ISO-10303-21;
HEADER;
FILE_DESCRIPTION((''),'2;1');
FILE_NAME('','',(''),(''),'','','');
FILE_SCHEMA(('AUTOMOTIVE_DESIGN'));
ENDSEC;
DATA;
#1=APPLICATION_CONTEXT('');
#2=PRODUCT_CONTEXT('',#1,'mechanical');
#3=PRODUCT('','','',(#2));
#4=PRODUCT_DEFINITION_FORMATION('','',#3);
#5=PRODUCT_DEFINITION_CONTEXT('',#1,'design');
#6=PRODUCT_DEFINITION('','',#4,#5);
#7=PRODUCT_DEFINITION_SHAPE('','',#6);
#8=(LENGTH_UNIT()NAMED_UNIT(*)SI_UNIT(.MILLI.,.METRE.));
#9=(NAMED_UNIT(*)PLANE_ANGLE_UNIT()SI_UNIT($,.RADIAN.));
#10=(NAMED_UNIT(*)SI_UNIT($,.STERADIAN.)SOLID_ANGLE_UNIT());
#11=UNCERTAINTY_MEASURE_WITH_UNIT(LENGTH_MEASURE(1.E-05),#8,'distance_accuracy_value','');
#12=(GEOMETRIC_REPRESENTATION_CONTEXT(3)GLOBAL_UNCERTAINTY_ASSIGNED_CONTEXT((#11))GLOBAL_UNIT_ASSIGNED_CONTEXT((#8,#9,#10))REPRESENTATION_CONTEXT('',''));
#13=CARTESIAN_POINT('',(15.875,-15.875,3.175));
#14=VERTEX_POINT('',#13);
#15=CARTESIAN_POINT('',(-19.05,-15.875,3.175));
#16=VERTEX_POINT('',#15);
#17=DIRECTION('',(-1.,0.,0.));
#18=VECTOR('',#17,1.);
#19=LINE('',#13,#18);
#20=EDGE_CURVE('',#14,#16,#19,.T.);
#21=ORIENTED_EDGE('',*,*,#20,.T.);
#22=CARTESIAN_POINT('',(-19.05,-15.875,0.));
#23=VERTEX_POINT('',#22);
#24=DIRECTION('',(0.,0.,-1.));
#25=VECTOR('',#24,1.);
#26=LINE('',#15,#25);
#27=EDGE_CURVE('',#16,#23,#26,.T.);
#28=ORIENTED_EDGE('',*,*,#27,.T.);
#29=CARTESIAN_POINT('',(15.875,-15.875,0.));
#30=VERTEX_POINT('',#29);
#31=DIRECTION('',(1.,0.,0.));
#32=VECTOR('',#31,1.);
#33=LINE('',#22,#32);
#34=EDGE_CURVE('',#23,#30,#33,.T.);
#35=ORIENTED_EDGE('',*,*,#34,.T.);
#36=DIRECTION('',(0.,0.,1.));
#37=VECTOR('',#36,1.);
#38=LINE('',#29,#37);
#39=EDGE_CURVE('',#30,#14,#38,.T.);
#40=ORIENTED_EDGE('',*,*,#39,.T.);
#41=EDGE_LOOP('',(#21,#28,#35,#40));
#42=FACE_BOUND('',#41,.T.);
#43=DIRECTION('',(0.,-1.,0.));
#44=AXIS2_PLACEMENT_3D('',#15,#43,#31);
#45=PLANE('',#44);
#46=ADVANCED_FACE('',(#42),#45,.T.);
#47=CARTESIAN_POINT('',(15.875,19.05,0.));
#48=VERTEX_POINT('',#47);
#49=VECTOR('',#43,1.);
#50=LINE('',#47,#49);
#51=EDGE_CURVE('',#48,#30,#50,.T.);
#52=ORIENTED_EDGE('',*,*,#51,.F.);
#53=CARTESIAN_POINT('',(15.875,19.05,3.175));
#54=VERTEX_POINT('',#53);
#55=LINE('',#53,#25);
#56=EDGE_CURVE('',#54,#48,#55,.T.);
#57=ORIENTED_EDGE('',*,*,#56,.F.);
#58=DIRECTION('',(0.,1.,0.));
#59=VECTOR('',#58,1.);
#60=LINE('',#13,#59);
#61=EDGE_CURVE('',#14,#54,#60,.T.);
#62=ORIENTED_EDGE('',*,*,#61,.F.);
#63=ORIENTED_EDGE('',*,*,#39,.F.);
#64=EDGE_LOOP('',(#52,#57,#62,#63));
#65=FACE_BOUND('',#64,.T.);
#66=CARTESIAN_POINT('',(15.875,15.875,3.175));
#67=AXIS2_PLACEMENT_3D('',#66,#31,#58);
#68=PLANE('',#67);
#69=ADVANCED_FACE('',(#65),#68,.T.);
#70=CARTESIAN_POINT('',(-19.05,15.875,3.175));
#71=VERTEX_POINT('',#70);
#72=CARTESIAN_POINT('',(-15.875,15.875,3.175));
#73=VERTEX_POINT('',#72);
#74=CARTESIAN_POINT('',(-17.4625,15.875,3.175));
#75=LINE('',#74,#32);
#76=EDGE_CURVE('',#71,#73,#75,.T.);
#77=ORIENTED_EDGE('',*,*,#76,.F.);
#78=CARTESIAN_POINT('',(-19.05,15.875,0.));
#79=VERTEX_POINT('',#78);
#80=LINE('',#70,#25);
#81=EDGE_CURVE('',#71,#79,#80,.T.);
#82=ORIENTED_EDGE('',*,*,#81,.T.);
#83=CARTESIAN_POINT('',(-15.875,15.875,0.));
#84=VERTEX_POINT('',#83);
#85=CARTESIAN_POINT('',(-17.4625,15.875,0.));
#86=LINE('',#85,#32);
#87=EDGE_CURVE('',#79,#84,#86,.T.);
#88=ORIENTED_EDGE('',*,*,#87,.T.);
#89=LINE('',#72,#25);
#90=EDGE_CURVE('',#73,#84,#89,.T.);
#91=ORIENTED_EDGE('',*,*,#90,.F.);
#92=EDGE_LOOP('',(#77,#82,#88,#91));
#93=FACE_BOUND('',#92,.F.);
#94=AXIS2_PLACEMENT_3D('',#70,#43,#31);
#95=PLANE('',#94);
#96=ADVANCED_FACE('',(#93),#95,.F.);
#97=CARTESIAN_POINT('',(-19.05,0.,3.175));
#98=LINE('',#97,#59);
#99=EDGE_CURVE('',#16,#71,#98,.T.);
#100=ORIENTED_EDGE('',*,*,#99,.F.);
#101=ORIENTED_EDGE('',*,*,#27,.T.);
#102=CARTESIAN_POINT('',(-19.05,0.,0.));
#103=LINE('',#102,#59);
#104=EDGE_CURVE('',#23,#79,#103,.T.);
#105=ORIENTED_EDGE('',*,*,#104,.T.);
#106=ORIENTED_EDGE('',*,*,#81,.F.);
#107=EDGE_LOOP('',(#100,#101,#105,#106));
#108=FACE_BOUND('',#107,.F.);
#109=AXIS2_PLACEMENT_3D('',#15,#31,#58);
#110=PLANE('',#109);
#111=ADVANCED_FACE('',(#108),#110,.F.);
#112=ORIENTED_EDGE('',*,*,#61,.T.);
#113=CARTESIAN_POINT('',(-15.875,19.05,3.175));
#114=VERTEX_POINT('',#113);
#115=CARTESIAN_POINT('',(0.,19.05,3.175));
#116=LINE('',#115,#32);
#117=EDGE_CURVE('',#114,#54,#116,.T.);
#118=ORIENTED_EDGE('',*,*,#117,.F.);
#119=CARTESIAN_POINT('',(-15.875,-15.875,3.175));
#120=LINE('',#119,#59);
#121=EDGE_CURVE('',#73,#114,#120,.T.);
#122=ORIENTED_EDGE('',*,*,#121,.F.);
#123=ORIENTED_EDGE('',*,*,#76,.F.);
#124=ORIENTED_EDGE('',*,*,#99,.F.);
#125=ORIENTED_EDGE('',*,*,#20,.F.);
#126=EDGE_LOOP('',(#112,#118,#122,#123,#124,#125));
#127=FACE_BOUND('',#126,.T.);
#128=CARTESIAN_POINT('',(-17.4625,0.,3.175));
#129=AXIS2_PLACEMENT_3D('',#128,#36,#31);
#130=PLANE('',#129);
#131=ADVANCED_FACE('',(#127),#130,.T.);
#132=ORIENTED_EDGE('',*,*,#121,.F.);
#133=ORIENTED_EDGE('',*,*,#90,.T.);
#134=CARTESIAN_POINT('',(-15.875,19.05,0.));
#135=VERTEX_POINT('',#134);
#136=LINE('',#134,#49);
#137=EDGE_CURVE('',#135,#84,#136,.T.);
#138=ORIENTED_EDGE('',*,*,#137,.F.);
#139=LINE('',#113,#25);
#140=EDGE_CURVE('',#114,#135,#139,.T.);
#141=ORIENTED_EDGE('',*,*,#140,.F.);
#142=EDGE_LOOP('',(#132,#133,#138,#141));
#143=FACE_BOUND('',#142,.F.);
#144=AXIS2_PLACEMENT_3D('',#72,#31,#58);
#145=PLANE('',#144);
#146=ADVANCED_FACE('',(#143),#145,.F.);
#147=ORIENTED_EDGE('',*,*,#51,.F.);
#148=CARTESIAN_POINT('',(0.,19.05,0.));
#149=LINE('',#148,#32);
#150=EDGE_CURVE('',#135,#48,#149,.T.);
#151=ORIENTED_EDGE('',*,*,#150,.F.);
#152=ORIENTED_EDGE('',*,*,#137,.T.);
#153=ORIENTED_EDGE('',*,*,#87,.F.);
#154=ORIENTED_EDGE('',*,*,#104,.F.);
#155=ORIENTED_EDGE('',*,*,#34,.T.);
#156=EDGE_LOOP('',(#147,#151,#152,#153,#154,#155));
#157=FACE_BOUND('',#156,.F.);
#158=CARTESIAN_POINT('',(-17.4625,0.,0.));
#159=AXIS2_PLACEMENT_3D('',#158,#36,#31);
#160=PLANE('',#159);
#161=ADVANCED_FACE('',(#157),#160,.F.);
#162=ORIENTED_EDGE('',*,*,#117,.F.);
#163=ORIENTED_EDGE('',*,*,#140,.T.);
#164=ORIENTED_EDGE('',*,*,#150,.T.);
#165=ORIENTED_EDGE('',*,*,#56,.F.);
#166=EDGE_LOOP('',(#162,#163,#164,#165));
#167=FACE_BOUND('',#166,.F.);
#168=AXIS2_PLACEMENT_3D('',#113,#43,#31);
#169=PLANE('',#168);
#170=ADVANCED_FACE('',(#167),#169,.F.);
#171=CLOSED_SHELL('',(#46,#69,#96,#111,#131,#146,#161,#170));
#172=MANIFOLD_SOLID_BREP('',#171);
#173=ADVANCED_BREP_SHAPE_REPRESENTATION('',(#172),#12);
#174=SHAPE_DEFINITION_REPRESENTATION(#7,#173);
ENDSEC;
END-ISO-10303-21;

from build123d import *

# Parameters (mm, degrees)
F0_W     = 31.75
F0_H     = 31.75
F1_DEPTH = 3.175
F2_W     = 31.75
F2_H     = 3.175
F3_DEPTH = 3.175
F4_W     = 3.175
F4_H     = 31.75
F5_DEPTH = 3.175


# Not quite as in the source:
# - a length typed as a fraction of an inch, garbled in the dataset ("3 / 203.2 mm" for 3/8 in), is restored


with BuildPart() as f1:
    # F0 (on Top) → F1 (new body)
    with BuildSketch(Plane.XY):
        Rectangle(F0_W, F0_H)
    extrude(amount=F1_DEPTH)

    # F2 (on face) → F3 (join)
    with BuildSketch(Plane.XY.offset(3.175)):
        with Locations((0, 17.4625)):
            Rectangle(F2_W, F2_H)
    extrude(amount=-F3_DEPTH)

    # F4 (on face) → F5 (join)
    with BuildSketch(Plane.XY.offset(3.175)):
        with Locations((-17.4625, 0)):
            Rectangle(F4_W, F4_H)
    extrude(amount=-F5_DEPTH)


solid = f1.part
